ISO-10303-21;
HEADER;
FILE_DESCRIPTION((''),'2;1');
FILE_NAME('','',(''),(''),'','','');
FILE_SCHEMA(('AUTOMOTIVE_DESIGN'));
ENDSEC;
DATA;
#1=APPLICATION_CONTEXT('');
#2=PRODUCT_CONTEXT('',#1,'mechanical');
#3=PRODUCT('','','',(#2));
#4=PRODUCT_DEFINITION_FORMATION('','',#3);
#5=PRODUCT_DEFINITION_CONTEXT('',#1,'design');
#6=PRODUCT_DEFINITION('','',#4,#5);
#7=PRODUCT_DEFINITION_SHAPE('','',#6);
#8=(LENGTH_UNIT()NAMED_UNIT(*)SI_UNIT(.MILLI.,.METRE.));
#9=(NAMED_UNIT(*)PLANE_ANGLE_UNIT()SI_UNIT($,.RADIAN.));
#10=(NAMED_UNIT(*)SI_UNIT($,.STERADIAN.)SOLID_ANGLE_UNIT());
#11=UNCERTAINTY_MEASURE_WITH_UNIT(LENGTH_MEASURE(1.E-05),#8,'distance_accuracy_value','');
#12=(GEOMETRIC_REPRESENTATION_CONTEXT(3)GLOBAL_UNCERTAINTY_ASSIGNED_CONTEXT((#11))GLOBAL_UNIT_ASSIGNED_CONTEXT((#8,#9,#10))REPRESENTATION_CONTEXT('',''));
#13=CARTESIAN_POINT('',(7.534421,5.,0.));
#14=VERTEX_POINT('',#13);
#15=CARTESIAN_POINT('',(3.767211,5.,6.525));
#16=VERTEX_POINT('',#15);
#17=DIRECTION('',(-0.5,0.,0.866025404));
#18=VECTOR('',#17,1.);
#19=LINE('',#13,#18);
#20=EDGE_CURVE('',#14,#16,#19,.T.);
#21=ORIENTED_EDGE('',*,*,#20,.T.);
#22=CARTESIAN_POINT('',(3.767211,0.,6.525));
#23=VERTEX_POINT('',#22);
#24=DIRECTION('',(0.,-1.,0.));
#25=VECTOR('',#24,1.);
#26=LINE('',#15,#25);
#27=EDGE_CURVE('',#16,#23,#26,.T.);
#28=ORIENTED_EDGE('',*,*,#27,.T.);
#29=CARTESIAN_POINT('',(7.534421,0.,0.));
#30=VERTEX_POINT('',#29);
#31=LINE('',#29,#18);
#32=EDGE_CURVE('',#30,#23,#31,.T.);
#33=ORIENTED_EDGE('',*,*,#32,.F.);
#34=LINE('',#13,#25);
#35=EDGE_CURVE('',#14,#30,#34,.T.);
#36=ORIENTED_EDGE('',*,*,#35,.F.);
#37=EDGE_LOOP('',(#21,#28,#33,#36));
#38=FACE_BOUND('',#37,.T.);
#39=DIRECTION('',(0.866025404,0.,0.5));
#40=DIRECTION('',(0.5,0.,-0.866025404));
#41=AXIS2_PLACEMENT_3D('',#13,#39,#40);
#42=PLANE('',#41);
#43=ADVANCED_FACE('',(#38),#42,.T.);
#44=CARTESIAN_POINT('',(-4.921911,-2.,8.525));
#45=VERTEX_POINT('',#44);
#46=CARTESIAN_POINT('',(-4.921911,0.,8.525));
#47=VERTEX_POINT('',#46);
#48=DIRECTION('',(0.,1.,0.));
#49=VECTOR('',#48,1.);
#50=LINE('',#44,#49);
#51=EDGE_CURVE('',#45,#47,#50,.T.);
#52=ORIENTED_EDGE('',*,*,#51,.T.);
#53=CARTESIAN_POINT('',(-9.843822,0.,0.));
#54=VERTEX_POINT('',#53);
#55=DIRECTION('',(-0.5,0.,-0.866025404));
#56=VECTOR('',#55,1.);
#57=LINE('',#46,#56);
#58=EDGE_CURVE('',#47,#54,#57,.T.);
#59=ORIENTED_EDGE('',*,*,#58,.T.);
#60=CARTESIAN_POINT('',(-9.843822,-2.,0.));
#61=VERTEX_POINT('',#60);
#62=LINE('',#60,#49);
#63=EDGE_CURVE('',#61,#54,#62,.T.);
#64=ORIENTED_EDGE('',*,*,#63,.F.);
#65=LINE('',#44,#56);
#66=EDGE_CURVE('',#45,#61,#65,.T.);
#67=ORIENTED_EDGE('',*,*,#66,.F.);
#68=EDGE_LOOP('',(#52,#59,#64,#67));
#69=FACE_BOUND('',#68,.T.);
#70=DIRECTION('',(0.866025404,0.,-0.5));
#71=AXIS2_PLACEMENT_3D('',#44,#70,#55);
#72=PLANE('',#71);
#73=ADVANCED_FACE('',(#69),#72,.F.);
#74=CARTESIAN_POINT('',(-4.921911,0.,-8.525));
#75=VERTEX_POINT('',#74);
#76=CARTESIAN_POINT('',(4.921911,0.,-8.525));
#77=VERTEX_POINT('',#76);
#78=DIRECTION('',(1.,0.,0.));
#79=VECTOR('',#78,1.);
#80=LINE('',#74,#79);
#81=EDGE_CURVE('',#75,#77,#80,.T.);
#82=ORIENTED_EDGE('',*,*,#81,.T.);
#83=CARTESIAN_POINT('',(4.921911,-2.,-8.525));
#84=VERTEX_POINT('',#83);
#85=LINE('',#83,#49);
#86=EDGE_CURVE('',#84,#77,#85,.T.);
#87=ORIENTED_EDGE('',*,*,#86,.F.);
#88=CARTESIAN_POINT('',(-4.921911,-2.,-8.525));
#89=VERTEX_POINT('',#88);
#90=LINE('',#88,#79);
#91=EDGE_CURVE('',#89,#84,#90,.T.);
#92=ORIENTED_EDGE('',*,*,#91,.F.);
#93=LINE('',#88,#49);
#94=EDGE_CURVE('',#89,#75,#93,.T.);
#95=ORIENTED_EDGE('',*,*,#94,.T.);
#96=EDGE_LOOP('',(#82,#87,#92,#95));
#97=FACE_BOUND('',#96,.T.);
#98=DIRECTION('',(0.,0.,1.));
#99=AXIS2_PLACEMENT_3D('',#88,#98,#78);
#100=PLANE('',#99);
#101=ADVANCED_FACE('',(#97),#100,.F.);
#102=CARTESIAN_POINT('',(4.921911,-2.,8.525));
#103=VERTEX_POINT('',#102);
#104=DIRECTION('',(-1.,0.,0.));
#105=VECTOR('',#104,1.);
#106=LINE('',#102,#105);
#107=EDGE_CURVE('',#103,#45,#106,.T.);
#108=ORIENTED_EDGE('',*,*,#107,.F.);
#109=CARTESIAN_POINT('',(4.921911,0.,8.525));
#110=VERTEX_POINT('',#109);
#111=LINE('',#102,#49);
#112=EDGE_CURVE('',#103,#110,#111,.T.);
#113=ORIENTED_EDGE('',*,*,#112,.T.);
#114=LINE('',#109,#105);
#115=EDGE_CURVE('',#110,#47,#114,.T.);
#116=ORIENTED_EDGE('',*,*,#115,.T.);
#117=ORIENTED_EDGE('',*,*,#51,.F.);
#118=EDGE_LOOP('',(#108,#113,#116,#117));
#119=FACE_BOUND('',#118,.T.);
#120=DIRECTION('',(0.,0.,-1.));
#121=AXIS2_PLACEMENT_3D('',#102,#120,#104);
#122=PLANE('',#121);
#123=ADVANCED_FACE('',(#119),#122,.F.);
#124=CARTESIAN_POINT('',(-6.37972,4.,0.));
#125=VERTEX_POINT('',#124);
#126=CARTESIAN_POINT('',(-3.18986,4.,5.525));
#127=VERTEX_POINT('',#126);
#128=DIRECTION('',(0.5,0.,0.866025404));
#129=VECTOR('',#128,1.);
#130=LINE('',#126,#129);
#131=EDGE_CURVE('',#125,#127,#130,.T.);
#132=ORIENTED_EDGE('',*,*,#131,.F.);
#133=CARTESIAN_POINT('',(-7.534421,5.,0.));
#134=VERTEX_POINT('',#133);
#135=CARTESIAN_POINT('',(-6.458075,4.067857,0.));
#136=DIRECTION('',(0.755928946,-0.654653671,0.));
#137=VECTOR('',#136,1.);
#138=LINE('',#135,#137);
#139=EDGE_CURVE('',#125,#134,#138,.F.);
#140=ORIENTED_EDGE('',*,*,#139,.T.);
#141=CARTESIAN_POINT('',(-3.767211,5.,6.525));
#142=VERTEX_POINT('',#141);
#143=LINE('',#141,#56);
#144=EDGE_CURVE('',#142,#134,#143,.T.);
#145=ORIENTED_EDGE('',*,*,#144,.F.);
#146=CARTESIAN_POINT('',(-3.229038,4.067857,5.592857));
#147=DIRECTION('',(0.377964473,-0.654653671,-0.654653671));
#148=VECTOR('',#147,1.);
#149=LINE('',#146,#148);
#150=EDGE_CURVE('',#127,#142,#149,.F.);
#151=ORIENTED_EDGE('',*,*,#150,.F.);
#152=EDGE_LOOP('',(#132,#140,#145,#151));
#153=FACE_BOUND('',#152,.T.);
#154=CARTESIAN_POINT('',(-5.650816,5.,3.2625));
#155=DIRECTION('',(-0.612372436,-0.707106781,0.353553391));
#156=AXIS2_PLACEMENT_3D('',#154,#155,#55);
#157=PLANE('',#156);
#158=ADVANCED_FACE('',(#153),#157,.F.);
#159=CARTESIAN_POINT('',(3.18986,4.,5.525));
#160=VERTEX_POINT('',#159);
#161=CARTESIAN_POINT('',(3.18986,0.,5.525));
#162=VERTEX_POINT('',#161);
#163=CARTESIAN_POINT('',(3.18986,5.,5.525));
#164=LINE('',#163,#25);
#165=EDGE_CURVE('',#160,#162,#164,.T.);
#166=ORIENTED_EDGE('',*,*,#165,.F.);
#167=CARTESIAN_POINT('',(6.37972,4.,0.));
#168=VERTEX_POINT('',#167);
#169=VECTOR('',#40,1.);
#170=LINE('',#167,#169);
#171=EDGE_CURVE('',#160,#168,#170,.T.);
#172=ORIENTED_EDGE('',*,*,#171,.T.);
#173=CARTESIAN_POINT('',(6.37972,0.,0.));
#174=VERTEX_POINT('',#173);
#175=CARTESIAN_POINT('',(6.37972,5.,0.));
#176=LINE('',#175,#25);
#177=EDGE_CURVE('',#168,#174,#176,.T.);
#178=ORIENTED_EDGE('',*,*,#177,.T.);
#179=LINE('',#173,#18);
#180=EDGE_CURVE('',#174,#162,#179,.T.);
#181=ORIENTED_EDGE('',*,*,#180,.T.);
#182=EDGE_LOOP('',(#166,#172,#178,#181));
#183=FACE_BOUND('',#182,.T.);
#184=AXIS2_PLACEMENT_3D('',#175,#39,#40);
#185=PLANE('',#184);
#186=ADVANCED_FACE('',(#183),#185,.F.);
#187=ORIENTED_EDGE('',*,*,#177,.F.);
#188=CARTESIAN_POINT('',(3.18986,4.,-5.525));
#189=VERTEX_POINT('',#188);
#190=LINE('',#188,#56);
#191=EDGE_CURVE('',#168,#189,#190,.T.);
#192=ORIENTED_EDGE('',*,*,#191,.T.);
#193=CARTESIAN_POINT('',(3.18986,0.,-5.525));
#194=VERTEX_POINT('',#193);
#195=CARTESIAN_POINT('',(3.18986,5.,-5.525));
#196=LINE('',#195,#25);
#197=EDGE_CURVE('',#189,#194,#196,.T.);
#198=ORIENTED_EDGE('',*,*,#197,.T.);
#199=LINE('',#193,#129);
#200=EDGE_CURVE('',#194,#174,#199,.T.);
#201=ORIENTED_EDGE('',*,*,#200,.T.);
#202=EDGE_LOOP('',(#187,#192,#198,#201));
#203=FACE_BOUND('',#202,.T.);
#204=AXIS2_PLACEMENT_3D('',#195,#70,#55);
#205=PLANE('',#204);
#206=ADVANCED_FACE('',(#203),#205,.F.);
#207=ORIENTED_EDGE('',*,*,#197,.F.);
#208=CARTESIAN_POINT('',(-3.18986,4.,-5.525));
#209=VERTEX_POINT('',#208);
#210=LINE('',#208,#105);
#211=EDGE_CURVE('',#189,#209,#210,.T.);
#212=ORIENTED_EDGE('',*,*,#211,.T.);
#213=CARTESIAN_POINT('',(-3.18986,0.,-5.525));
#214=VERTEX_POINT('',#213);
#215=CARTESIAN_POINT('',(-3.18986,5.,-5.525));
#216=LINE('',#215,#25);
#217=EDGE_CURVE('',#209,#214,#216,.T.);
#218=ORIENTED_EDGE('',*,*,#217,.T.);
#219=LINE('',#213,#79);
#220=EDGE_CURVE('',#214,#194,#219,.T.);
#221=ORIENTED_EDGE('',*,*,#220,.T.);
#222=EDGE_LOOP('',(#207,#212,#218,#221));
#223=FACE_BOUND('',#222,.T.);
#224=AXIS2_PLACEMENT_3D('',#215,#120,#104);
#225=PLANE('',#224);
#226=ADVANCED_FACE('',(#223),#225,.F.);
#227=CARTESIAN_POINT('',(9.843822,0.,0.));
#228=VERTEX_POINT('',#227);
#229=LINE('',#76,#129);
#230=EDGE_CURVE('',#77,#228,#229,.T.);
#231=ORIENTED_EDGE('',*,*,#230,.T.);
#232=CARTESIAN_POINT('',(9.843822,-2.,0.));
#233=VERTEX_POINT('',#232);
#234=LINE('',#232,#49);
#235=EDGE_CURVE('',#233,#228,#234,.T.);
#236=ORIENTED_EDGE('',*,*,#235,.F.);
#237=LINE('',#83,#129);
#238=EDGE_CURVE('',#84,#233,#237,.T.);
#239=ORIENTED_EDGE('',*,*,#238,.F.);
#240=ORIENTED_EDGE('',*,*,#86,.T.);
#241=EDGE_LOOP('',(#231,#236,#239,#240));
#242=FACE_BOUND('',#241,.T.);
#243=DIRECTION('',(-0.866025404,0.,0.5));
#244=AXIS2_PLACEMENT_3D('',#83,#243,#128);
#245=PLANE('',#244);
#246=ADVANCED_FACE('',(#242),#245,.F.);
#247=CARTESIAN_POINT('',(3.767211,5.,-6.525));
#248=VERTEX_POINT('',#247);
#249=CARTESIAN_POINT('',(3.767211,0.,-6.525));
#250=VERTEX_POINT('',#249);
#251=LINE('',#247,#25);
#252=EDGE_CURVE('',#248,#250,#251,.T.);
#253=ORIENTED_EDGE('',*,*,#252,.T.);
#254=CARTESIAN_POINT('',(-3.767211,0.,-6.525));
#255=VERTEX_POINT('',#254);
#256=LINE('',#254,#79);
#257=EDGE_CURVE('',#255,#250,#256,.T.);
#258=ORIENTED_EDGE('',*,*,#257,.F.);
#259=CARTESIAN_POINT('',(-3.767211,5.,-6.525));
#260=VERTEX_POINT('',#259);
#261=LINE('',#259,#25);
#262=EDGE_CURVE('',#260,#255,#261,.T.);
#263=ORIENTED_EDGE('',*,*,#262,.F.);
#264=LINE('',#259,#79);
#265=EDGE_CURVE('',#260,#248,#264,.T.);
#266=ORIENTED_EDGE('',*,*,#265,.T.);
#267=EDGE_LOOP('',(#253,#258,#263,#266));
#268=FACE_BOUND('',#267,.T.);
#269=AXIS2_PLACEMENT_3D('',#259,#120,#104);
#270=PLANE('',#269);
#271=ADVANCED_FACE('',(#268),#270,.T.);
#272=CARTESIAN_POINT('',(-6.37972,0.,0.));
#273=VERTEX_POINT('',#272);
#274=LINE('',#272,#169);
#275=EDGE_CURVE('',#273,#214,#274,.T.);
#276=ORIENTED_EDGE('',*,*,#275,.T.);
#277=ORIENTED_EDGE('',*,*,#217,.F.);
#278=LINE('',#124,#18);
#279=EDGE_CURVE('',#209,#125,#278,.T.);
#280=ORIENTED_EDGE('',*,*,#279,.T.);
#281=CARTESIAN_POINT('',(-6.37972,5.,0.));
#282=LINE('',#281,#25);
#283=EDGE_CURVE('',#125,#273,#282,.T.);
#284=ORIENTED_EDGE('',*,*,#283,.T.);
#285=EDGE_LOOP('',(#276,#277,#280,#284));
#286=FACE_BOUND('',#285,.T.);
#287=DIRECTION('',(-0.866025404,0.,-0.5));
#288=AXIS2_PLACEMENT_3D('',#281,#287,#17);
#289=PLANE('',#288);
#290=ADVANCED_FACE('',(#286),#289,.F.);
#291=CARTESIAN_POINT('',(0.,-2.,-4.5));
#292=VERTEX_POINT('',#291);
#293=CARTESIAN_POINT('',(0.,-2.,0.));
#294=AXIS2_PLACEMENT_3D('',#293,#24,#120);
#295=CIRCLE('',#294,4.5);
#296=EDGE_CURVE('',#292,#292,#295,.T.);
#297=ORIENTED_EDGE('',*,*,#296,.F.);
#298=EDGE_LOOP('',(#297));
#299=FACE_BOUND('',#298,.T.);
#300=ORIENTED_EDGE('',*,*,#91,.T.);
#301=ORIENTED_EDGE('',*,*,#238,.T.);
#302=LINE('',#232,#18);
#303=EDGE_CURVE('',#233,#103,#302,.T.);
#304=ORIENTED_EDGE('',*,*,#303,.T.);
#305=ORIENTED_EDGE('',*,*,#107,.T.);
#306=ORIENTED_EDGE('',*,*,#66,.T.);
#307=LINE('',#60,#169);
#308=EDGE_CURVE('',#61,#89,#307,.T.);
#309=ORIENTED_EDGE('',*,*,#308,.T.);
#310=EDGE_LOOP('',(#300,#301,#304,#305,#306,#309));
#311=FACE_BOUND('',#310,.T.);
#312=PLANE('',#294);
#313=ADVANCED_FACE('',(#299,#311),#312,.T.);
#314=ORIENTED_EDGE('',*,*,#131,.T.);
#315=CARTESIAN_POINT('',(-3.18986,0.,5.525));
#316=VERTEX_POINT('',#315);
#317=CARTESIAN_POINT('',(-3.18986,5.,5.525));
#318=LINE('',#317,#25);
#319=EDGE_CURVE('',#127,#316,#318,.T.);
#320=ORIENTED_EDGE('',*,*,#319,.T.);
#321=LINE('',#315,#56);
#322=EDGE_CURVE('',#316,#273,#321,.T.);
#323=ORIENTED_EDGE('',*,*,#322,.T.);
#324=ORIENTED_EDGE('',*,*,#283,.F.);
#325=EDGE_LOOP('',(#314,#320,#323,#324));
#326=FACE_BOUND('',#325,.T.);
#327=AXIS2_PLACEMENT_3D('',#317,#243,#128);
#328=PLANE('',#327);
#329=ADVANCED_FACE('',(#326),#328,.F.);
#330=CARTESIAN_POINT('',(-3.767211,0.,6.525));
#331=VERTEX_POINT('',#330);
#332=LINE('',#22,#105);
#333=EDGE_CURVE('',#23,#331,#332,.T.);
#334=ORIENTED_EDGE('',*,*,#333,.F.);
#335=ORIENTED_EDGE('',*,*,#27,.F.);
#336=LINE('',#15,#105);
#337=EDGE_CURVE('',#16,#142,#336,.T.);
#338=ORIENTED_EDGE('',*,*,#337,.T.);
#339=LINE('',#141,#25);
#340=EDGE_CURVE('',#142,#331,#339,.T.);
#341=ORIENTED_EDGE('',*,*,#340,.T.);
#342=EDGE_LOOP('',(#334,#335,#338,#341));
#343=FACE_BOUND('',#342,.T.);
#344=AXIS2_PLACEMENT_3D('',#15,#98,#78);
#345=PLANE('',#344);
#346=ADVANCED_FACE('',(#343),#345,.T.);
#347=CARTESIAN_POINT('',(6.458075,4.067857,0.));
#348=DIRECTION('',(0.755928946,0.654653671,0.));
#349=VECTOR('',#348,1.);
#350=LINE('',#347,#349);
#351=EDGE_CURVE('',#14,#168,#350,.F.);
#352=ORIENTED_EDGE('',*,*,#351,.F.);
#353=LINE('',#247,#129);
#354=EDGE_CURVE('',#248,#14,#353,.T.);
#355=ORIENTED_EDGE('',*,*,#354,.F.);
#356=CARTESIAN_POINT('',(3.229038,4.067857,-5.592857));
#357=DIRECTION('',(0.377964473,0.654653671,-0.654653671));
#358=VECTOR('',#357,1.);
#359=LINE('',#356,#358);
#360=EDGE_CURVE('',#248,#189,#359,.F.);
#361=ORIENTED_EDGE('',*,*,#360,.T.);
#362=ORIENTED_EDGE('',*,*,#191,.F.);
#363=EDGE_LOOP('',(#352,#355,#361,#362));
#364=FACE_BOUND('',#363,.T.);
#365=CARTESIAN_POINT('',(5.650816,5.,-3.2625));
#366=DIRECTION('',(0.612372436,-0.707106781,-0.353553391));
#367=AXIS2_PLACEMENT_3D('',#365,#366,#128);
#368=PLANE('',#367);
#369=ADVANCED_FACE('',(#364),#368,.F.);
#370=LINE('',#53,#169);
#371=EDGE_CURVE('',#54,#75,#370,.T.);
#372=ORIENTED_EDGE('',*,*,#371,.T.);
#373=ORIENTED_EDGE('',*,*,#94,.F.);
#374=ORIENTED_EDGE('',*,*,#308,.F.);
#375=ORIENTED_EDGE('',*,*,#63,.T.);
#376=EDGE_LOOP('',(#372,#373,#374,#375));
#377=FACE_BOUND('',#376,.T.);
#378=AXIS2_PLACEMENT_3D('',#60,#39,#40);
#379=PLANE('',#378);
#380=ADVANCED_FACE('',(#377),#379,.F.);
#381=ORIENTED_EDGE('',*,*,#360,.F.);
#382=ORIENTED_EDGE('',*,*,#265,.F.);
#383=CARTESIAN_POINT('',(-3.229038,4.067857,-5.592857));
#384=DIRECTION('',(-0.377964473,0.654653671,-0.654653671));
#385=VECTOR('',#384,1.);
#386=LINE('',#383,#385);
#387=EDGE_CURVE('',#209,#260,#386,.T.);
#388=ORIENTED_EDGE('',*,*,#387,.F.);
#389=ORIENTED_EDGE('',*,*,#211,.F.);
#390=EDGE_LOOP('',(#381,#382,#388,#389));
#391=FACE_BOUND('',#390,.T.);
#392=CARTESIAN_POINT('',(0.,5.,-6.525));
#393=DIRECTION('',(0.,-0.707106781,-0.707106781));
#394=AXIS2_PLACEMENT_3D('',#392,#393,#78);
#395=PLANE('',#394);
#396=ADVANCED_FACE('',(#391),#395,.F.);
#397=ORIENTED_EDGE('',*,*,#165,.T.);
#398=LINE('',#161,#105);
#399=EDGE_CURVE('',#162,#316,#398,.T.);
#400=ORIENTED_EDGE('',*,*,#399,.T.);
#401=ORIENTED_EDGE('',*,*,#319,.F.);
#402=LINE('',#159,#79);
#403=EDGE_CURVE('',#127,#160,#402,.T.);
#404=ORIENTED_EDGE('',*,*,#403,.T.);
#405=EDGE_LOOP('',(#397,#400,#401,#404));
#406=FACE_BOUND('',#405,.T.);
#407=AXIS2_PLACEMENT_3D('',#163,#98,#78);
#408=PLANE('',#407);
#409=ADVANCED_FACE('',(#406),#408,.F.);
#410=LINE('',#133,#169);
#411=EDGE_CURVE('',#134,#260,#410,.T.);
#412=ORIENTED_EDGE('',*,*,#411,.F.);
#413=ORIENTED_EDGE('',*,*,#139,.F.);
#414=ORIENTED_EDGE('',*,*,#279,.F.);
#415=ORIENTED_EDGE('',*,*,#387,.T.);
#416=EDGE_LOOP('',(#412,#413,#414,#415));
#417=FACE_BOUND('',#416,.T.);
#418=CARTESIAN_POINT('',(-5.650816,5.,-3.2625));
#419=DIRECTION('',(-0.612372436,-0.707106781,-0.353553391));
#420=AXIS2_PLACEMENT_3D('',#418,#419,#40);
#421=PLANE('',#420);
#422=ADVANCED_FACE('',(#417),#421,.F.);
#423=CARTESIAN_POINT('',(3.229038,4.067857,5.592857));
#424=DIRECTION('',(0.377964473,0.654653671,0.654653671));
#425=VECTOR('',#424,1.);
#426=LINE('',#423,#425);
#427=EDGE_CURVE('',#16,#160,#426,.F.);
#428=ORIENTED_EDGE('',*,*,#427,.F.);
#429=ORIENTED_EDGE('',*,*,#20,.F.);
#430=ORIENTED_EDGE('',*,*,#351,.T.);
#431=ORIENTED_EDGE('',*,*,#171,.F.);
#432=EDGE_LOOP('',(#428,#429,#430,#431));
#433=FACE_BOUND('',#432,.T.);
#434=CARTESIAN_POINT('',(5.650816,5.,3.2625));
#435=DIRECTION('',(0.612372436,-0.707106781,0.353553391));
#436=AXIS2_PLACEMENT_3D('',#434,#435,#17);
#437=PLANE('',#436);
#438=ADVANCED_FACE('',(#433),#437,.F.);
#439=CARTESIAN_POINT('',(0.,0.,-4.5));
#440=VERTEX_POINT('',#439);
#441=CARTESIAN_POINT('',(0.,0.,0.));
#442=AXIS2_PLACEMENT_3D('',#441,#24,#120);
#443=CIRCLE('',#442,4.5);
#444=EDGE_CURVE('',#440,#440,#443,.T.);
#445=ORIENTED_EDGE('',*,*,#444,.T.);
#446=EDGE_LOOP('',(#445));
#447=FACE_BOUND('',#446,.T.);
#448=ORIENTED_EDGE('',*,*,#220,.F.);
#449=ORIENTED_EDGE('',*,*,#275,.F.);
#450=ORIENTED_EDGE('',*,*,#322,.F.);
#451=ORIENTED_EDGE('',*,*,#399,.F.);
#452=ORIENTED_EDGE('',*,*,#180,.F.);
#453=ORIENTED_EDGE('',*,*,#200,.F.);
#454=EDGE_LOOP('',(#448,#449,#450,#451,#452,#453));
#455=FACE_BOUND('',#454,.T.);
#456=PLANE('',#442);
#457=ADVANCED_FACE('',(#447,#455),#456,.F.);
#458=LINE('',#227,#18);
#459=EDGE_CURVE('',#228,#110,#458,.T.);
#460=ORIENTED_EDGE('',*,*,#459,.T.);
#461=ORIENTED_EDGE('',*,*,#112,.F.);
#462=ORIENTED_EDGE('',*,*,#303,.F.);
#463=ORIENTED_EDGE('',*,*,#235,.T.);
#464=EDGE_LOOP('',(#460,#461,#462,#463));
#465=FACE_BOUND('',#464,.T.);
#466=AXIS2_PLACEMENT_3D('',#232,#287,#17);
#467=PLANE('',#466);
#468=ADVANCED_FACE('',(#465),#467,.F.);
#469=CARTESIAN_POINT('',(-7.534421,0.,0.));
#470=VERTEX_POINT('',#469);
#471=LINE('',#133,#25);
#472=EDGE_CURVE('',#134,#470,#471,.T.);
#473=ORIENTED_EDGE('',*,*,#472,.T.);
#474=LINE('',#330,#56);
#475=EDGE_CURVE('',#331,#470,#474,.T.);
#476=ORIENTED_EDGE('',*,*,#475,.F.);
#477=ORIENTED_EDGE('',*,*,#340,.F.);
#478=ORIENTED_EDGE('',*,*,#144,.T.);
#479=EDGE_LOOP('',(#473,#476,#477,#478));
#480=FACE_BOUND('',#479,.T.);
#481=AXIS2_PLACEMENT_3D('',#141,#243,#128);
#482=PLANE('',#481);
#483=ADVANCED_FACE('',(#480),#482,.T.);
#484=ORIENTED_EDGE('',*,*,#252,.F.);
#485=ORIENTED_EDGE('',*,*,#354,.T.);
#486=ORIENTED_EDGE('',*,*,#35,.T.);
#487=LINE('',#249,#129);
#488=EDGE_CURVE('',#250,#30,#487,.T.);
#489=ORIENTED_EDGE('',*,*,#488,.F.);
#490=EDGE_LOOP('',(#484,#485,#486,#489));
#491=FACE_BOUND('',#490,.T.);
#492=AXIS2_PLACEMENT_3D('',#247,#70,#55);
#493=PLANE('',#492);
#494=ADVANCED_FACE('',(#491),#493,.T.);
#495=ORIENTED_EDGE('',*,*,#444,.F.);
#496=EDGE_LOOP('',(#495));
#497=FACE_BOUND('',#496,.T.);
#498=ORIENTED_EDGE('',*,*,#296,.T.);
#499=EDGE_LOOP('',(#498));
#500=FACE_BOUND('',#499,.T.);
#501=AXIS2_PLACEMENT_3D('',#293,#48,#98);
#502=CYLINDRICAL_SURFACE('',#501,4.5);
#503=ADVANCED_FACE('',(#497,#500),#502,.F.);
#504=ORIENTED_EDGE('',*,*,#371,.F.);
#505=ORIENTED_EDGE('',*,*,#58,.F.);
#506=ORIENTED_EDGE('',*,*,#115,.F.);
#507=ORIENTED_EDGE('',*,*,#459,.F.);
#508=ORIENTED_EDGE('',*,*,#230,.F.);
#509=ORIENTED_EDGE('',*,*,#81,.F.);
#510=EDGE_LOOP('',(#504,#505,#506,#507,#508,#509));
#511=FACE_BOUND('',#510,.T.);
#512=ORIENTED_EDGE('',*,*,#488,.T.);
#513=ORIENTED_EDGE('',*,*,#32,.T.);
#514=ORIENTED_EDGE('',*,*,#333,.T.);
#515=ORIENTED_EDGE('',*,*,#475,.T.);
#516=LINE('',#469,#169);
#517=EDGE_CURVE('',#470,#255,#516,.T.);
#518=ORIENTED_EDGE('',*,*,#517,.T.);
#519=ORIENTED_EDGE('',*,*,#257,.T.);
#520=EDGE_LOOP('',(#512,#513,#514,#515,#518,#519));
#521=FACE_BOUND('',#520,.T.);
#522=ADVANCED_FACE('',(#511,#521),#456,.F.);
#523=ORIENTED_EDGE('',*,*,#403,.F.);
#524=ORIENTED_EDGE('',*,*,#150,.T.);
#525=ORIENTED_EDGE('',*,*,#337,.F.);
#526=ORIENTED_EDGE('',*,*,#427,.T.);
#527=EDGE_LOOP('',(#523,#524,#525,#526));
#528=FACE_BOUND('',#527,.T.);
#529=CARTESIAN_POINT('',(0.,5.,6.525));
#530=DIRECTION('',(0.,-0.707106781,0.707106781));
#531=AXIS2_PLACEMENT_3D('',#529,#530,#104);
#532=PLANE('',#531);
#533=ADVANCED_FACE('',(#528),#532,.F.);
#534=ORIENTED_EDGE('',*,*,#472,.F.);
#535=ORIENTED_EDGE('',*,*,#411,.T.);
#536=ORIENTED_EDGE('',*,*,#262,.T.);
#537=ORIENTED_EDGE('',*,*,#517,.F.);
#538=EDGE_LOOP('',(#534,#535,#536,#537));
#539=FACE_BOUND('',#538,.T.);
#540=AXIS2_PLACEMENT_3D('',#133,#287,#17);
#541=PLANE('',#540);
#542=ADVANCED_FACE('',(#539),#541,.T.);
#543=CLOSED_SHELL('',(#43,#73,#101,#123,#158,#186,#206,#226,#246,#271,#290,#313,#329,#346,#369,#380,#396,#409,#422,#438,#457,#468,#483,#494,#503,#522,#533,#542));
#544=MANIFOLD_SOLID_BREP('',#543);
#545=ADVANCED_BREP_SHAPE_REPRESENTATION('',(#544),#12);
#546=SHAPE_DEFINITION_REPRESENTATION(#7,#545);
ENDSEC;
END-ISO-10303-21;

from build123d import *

# Parameters (mm, degrees)
SKETCH2_R           = 4.5
BOSS_EXTRUDE1_DEPTH = 2
BOSS_EXTRUDE2_DEPTH = 5
CHAMFER1_SIZE       = 1


with BuildPart() as part:
    # Sketch2 → Boss-Extrude1 (new body)
    with BuildSketch(Plane.XZ):
        Polygon((-4.921911045, -8.525), (4.921911045, -8.525), (9.84382209, 0), (4.921911045, 8.525), (-4.921911045, 8.525), (-9.84382209, 0), align=None)
        with Locations(Location((0, 0, 0), (0, 0, 270))):
            Circle(SKETCH2_R, mode=Mode.SUBTRACT)
    extrude(amount=BOSS_EXTRUDE1_DEPTH)

    # Sketch3 → Boss-Extrude2 (add)
    with BuildSketch(Plane.XZ):
        Polygon((7.534421013, 0), (3.767210506, 6.525), (-3.767210506, 6.525), (-7.534421013, 0), (-3.767210506, -6.525), (3.767210506, -6.525), align=None)
        Polygon((3.189860237, 5.525), (-3.189860237, 5.525), (-6.379720475, 0), (-3.189860237, -5.525), (3.189860237, -5.525), (6.379720475, 0), align=None, mode=Mode.SUBTRACT)
    extrude(amount=-BOSS_EXTRUDE2_DEPTH)

    # Chamfer1
    chamfer1_edges = [part.edges().sort_by_distance(p)[0] for p in [
        (4.784790356, 5, -2.7625),
        (4.784790356, 5, 2.7625),
        (0, 5, 5.525),
        (-4.784790356, 5, 2.7625),
        (-4.784790356, 5, -2.7625),
        (0, 5, -5.525),
    ]]
    chamfer(chamfer1_edges, length=CHAMFER1_SIZE - 0.0001)  # a hair under: the kernel refuses the full size


solid = part.part
